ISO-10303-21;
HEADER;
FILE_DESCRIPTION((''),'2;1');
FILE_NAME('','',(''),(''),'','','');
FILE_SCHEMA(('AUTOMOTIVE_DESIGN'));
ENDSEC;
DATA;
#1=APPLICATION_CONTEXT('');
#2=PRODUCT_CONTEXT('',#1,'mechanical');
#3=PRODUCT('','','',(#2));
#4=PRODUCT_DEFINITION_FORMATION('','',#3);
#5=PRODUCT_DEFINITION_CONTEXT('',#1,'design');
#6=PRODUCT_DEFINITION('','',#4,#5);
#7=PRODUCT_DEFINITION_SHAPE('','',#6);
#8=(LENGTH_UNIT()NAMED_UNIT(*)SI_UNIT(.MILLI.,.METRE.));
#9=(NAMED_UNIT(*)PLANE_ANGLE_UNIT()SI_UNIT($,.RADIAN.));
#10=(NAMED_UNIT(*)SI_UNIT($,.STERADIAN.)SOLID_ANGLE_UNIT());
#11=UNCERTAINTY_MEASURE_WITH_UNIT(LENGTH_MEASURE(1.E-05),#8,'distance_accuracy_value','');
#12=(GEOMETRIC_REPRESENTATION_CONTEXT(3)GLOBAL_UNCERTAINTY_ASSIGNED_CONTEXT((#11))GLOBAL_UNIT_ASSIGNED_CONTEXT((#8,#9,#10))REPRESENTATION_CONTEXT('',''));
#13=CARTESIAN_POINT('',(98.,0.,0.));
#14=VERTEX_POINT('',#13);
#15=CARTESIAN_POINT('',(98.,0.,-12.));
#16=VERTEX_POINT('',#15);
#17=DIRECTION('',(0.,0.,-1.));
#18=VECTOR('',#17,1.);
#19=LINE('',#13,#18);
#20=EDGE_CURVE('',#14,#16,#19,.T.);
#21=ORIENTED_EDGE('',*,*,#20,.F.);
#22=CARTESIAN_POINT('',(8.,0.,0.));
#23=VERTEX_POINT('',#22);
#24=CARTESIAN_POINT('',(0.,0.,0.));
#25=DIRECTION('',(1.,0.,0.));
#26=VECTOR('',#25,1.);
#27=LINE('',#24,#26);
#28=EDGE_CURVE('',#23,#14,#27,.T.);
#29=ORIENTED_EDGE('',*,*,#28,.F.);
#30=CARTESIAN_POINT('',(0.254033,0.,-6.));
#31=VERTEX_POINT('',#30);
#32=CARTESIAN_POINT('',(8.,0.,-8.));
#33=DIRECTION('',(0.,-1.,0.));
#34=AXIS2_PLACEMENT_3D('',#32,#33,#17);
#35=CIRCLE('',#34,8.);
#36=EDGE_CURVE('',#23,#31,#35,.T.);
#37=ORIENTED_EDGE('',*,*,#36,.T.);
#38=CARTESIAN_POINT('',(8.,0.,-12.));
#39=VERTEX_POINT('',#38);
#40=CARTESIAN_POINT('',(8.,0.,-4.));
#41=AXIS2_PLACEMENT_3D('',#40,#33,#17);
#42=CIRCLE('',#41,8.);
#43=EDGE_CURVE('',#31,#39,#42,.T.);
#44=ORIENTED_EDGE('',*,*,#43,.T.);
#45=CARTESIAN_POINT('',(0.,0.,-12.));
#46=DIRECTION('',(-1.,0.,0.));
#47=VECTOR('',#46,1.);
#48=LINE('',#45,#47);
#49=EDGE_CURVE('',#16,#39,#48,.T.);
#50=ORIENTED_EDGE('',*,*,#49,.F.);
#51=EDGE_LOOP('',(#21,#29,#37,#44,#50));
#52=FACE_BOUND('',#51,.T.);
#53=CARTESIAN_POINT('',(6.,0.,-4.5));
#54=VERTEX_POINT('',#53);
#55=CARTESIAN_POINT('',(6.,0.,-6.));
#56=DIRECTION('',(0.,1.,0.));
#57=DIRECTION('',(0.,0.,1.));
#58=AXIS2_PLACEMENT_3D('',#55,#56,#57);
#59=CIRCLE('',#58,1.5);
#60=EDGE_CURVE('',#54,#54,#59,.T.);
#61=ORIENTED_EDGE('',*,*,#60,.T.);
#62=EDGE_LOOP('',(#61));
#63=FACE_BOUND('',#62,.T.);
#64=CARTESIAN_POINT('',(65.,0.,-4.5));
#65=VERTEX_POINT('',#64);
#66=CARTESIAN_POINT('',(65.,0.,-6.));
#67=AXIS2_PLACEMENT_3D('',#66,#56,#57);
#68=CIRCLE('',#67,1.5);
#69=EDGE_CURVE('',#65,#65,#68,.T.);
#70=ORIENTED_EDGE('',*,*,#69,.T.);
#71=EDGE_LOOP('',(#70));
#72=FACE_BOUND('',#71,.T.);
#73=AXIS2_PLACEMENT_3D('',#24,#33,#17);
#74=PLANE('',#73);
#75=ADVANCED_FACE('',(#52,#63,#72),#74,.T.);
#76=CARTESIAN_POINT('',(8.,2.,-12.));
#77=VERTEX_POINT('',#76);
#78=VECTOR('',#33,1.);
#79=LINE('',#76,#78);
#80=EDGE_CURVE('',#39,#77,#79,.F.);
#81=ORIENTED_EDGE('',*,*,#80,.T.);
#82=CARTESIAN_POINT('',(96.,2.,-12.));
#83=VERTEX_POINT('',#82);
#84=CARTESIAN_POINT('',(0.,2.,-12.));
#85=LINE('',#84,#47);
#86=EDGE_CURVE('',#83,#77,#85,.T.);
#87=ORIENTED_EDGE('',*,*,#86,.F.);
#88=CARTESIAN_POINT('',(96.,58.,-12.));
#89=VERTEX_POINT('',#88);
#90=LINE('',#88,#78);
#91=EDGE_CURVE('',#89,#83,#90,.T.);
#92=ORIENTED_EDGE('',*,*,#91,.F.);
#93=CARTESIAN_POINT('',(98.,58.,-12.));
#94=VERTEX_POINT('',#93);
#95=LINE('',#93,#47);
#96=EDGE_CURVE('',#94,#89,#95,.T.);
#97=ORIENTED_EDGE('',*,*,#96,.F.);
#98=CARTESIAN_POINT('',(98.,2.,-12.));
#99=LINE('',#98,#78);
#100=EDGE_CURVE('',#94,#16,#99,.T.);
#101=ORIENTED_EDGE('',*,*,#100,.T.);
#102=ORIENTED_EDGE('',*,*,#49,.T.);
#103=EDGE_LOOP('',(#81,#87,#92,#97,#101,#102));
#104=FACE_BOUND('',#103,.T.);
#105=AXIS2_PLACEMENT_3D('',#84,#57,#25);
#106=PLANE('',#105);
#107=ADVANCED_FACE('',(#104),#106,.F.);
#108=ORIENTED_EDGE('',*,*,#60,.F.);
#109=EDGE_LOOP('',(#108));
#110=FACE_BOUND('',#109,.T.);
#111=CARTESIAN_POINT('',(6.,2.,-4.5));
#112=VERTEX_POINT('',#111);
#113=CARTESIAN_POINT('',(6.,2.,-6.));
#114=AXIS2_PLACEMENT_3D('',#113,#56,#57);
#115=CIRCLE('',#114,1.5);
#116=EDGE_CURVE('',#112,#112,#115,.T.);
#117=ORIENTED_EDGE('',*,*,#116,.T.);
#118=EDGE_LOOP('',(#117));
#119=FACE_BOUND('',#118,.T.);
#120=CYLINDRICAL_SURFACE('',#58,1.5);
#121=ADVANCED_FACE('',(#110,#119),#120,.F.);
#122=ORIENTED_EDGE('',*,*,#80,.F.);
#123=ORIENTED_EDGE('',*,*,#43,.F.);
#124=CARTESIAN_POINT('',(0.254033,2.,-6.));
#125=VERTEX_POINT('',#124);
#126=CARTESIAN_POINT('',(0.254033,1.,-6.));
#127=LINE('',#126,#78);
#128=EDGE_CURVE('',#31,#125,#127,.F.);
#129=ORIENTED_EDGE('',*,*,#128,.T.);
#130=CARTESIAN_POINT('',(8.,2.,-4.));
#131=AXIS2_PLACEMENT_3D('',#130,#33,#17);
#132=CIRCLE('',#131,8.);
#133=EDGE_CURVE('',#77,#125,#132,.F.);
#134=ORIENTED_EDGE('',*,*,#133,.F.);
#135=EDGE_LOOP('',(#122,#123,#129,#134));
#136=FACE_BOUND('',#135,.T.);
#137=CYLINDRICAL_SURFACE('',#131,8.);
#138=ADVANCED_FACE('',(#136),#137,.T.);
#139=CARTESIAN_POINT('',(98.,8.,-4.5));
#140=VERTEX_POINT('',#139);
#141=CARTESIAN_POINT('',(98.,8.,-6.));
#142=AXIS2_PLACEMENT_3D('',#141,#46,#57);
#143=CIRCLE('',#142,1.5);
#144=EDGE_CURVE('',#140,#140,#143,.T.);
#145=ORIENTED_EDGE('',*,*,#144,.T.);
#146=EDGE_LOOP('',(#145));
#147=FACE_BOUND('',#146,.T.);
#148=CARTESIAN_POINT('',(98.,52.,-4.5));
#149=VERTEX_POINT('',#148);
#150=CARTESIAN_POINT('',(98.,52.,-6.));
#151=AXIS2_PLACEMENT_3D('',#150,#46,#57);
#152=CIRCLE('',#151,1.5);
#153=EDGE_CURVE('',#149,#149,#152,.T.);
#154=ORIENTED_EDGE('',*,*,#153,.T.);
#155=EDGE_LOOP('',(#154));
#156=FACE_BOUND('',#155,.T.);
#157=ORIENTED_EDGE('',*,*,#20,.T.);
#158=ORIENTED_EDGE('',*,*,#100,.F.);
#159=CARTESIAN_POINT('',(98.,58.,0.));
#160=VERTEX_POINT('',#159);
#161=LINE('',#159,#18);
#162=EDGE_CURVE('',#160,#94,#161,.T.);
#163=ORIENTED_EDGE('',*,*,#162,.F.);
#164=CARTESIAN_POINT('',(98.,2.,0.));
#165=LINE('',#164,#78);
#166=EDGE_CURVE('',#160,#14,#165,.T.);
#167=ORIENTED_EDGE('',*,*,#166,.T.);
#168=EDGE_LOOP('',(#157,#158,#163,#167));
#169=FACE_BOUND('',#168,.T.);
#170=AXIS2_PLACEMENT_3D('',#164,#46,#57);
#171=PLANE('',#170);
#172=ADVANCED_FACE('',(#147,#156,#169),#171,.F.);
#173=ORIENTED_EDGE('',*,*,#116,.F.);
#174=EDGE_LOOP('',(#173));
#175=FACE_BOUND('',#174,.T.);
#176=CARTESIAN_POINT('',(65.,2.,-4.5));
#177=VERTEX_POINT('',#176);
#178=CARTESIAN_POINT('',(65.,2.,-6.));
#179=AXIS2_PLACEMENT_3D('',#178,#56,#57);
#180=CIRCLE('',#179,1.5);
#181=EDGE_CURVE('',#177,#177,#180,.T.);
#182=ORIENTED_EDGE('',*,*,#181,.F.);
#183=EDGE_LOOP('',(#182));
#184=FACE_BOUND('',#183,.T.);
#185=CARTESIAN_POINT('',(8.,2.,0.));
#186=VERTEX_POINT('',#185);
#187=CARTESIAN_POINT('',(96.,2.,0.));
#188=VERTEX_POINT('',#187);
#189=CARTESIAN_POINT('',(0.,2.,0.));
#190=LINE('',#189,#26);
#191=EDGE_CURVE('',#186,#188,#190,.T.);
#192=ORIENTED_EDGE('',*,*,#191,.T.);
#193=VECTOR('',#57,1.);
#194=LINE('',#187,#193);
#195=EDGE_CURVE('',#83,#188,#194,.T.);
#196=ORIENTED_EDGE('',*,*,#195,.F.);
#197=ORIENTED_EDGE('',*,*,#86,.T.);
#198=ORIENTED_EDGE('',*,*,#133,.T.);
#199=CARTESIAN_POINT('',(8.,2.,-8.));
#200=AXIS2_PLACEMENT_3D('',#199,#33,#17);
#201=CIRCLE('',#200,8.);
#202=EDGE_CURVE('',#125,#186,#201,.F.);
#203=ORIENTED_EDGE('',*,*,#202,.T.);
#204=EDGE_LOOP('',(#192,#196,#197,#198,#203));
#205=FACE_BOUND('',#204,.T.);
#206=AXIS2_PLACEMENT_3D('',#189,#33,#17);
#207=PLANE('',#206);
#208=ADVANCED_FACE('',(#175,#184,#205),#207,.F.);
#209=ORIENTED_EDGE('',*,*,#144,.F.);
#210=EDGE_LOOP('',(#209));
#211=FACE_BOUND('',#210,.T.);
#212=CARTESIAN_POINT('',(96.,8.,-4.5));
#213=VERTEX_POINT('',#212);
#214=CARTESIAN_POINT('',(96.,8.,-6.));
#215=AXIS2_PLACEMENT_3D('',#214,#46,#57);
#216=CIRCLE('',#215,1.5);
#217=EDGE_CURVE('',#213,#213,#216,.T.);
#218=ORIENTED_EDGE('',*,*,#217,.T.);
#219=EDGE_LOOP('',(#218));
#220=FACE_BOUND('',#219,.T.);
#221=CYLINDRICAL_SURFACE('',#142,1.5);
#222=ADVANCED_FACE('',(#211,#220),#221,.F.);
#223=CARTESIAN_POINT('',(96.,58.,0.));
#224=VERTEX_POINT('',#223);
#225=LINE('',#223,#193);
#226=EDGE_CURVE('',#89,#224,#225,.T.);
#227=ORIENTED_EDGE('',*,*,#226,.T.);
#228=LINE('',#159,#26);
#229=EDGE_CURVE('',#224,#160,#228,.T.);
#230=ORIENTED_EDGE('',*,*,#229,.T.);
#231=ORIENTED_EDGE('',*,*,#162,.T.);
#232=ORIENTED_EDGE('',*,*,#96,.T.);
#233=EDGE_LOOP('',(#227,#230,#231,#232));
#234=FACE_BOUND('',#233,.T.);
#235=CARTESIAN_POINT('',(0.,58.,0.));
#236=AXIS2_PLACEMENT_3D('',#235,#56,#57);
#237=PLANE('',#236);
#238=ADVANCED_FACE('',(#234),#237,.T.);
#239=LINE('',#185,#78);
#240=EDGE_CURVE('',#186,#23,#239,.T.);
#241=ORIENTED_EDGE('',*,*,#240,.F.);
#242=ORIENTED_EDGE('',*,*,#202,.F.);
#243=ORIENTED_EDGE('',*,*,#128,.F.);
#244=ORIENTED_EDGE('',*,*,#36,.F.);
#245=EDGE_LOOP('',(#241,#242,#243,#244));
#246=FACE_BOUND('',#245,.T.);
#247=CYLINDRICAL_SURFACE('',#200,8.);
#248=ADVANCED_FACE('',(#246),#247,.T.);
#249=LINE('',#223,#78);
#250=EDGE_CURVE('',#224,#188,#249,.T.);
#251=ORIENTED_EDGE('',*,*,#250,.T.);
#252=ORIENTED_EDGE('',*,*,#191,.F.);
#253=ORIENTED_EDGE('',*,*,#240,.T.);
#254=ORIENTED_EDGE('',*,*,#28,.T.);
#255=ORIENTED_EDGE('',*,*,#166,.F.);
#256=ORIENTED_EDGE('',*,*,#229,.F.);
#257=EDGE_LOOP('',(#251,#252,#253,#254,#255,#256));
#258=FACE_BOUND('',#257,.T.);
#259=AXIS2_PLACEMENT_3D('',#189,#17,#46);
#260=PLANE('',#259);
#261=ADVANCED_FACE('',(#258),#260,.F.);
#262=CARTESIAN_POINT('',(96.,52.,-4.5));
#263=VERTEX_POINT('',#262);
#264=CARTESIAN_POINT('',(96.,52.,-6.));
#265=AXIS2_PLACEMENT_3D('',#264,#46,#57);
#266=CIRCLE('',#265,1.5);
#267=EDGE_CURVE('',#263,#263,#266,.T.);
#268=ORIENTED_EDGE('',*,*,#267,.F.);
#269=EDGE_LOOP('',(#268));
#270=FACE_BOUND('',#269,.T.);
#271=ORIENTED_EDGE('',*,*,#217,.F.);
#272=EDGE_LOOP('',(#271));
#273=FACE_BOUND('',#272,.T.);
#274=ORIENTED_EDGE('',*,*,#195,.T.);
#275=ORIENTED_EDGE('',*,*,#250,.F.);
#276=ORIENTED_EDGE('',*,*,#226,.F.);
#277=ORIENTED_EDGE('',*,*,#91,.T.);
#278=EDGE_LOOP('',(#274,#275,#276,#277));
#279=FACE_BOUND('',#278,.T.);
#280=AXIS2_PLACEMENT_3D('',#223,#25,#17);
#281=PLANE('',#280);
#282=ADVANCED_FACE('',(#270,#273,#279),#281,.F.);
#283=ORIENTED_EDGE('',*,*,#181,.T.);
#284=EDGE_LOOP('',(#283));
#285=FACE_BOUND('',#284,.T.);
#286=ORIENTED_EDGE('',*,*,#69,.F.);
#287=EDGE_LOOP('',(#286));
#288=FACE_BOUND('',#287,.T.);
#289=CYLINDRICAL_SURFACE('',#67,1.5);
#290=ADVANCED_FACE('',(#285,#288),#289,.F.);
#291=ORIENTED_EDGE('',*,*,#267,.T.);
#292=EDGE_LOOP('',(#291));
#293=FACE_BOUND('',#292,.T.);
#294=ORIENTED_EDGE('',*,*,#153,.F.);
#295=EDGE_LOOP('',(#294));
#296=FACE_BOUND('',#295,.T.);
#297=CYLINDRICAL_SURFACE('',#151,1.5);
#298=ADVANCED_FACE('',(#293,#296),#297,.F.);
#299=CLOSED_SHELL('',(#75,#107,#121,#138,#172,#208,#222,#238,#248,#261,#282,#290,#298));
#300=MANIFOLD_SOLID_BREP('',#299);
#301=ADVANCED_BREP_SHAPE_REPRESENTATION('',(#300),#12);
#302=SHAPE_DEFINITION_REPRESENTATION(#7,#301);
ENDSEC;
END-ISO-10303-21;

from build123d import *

# Parameters (mm, degrees)
SKETCH1_W           = 98
SKETCH1_H           = 12
BOSS_EXTRUDE1_DEPTH = 2
SKETCH2_W           = 2
SKETCH2_H           = 12
BOSS_EXTRUDE2_DEPTH = 56
SKETCH3_R           = 1.5
CUT_EXTRUDE1_DEPTH  = 114.507708989
FILLET1_R           = 8
SKETCH4_R           = 1.5
CUT_EXTRUDE2_DEPTH  = 113.584591032


with BuildPart() as part:
    # Sketch1 → Boss-Extrude1 (new body)
    with BuildSketch(Plane(origin=(0, 0, 0), x_dir=(1, 0, 0), z_dir=(0, 1, 0))):
        with Locations((49, 6)):
            Rectangle(SKETCH1_W, SKETCH1_H)
    extrude(amount=BOSS_EXTRUDE1_DEPTH)

    # Sketch2 → Boss-Extrude2 (add)
    with BuildSketch(Plane(origin=(0, 2, 0), x_dir=(1, 0, 0), z_dir=(0, 1, 0))):
        with Locations((97, 6)):
            Rectangle(SKETCH2_W, SKETCH2_H)
    extrude(amount=BOSS_EXTRUDE2_DEPTH)

    # Sketch3 → Cut-Extrude1 (cut, through all)
    with BuildSketch(Plane(origin=(0, 2, 0), x_dir=(1, 0, 0), z_dir=(0, 1, 0))):
        with Locations(Location((6, 6, 0), (0, 0, 270))):
            Circle(SKETCH3_R)
        with Locations(Location((65, 6, 0), (0, 0, 270))):
            Circle(SKETCH3_R)
    extrude(amount=-CUT_EXTRUDE1_DEPTH, mode=Mode.SUBTRACT)

    # Fillet1
    # the kernel refuses this fillet: 8 mm, written as the material it takes off along each edge
    with BuildSketch(Plane(origin=(0, -20, 0), x_dir=(1, 0, 0), z_dir=(0, 1, 0)), Plane(origin=(0, -20, -12), x_dir=(0, 0, 1), z_dir=(0, 1, 0))) as fillet1_piece_1:
        with BuildLine():
            CenterArc((FILLET1_R, FILLET1_R), FILLET1_R, 180, 90)
            Line((0, FILLET1_R), (0, 0))
            Line((0, 0), (FILLET1_R, 0))
        make_face()
    extrude(amount=42, mode=Mode.SUBTRACT)

    # Sketch4 → Cut-Extrude2 (cut, through all)
    with BuildSketch(Plane.ZY.offset(-96)):
        with Locations((-6, 8)):
            Circle(SKETCH4_R)
        with Locations((-6, 52)):
            Circle(SKETCH4_R)
    extrude(amount=-CUT_EXTRUDE2_DEPTH, mode=Mode.SUBTRACT)


solid = part.part
